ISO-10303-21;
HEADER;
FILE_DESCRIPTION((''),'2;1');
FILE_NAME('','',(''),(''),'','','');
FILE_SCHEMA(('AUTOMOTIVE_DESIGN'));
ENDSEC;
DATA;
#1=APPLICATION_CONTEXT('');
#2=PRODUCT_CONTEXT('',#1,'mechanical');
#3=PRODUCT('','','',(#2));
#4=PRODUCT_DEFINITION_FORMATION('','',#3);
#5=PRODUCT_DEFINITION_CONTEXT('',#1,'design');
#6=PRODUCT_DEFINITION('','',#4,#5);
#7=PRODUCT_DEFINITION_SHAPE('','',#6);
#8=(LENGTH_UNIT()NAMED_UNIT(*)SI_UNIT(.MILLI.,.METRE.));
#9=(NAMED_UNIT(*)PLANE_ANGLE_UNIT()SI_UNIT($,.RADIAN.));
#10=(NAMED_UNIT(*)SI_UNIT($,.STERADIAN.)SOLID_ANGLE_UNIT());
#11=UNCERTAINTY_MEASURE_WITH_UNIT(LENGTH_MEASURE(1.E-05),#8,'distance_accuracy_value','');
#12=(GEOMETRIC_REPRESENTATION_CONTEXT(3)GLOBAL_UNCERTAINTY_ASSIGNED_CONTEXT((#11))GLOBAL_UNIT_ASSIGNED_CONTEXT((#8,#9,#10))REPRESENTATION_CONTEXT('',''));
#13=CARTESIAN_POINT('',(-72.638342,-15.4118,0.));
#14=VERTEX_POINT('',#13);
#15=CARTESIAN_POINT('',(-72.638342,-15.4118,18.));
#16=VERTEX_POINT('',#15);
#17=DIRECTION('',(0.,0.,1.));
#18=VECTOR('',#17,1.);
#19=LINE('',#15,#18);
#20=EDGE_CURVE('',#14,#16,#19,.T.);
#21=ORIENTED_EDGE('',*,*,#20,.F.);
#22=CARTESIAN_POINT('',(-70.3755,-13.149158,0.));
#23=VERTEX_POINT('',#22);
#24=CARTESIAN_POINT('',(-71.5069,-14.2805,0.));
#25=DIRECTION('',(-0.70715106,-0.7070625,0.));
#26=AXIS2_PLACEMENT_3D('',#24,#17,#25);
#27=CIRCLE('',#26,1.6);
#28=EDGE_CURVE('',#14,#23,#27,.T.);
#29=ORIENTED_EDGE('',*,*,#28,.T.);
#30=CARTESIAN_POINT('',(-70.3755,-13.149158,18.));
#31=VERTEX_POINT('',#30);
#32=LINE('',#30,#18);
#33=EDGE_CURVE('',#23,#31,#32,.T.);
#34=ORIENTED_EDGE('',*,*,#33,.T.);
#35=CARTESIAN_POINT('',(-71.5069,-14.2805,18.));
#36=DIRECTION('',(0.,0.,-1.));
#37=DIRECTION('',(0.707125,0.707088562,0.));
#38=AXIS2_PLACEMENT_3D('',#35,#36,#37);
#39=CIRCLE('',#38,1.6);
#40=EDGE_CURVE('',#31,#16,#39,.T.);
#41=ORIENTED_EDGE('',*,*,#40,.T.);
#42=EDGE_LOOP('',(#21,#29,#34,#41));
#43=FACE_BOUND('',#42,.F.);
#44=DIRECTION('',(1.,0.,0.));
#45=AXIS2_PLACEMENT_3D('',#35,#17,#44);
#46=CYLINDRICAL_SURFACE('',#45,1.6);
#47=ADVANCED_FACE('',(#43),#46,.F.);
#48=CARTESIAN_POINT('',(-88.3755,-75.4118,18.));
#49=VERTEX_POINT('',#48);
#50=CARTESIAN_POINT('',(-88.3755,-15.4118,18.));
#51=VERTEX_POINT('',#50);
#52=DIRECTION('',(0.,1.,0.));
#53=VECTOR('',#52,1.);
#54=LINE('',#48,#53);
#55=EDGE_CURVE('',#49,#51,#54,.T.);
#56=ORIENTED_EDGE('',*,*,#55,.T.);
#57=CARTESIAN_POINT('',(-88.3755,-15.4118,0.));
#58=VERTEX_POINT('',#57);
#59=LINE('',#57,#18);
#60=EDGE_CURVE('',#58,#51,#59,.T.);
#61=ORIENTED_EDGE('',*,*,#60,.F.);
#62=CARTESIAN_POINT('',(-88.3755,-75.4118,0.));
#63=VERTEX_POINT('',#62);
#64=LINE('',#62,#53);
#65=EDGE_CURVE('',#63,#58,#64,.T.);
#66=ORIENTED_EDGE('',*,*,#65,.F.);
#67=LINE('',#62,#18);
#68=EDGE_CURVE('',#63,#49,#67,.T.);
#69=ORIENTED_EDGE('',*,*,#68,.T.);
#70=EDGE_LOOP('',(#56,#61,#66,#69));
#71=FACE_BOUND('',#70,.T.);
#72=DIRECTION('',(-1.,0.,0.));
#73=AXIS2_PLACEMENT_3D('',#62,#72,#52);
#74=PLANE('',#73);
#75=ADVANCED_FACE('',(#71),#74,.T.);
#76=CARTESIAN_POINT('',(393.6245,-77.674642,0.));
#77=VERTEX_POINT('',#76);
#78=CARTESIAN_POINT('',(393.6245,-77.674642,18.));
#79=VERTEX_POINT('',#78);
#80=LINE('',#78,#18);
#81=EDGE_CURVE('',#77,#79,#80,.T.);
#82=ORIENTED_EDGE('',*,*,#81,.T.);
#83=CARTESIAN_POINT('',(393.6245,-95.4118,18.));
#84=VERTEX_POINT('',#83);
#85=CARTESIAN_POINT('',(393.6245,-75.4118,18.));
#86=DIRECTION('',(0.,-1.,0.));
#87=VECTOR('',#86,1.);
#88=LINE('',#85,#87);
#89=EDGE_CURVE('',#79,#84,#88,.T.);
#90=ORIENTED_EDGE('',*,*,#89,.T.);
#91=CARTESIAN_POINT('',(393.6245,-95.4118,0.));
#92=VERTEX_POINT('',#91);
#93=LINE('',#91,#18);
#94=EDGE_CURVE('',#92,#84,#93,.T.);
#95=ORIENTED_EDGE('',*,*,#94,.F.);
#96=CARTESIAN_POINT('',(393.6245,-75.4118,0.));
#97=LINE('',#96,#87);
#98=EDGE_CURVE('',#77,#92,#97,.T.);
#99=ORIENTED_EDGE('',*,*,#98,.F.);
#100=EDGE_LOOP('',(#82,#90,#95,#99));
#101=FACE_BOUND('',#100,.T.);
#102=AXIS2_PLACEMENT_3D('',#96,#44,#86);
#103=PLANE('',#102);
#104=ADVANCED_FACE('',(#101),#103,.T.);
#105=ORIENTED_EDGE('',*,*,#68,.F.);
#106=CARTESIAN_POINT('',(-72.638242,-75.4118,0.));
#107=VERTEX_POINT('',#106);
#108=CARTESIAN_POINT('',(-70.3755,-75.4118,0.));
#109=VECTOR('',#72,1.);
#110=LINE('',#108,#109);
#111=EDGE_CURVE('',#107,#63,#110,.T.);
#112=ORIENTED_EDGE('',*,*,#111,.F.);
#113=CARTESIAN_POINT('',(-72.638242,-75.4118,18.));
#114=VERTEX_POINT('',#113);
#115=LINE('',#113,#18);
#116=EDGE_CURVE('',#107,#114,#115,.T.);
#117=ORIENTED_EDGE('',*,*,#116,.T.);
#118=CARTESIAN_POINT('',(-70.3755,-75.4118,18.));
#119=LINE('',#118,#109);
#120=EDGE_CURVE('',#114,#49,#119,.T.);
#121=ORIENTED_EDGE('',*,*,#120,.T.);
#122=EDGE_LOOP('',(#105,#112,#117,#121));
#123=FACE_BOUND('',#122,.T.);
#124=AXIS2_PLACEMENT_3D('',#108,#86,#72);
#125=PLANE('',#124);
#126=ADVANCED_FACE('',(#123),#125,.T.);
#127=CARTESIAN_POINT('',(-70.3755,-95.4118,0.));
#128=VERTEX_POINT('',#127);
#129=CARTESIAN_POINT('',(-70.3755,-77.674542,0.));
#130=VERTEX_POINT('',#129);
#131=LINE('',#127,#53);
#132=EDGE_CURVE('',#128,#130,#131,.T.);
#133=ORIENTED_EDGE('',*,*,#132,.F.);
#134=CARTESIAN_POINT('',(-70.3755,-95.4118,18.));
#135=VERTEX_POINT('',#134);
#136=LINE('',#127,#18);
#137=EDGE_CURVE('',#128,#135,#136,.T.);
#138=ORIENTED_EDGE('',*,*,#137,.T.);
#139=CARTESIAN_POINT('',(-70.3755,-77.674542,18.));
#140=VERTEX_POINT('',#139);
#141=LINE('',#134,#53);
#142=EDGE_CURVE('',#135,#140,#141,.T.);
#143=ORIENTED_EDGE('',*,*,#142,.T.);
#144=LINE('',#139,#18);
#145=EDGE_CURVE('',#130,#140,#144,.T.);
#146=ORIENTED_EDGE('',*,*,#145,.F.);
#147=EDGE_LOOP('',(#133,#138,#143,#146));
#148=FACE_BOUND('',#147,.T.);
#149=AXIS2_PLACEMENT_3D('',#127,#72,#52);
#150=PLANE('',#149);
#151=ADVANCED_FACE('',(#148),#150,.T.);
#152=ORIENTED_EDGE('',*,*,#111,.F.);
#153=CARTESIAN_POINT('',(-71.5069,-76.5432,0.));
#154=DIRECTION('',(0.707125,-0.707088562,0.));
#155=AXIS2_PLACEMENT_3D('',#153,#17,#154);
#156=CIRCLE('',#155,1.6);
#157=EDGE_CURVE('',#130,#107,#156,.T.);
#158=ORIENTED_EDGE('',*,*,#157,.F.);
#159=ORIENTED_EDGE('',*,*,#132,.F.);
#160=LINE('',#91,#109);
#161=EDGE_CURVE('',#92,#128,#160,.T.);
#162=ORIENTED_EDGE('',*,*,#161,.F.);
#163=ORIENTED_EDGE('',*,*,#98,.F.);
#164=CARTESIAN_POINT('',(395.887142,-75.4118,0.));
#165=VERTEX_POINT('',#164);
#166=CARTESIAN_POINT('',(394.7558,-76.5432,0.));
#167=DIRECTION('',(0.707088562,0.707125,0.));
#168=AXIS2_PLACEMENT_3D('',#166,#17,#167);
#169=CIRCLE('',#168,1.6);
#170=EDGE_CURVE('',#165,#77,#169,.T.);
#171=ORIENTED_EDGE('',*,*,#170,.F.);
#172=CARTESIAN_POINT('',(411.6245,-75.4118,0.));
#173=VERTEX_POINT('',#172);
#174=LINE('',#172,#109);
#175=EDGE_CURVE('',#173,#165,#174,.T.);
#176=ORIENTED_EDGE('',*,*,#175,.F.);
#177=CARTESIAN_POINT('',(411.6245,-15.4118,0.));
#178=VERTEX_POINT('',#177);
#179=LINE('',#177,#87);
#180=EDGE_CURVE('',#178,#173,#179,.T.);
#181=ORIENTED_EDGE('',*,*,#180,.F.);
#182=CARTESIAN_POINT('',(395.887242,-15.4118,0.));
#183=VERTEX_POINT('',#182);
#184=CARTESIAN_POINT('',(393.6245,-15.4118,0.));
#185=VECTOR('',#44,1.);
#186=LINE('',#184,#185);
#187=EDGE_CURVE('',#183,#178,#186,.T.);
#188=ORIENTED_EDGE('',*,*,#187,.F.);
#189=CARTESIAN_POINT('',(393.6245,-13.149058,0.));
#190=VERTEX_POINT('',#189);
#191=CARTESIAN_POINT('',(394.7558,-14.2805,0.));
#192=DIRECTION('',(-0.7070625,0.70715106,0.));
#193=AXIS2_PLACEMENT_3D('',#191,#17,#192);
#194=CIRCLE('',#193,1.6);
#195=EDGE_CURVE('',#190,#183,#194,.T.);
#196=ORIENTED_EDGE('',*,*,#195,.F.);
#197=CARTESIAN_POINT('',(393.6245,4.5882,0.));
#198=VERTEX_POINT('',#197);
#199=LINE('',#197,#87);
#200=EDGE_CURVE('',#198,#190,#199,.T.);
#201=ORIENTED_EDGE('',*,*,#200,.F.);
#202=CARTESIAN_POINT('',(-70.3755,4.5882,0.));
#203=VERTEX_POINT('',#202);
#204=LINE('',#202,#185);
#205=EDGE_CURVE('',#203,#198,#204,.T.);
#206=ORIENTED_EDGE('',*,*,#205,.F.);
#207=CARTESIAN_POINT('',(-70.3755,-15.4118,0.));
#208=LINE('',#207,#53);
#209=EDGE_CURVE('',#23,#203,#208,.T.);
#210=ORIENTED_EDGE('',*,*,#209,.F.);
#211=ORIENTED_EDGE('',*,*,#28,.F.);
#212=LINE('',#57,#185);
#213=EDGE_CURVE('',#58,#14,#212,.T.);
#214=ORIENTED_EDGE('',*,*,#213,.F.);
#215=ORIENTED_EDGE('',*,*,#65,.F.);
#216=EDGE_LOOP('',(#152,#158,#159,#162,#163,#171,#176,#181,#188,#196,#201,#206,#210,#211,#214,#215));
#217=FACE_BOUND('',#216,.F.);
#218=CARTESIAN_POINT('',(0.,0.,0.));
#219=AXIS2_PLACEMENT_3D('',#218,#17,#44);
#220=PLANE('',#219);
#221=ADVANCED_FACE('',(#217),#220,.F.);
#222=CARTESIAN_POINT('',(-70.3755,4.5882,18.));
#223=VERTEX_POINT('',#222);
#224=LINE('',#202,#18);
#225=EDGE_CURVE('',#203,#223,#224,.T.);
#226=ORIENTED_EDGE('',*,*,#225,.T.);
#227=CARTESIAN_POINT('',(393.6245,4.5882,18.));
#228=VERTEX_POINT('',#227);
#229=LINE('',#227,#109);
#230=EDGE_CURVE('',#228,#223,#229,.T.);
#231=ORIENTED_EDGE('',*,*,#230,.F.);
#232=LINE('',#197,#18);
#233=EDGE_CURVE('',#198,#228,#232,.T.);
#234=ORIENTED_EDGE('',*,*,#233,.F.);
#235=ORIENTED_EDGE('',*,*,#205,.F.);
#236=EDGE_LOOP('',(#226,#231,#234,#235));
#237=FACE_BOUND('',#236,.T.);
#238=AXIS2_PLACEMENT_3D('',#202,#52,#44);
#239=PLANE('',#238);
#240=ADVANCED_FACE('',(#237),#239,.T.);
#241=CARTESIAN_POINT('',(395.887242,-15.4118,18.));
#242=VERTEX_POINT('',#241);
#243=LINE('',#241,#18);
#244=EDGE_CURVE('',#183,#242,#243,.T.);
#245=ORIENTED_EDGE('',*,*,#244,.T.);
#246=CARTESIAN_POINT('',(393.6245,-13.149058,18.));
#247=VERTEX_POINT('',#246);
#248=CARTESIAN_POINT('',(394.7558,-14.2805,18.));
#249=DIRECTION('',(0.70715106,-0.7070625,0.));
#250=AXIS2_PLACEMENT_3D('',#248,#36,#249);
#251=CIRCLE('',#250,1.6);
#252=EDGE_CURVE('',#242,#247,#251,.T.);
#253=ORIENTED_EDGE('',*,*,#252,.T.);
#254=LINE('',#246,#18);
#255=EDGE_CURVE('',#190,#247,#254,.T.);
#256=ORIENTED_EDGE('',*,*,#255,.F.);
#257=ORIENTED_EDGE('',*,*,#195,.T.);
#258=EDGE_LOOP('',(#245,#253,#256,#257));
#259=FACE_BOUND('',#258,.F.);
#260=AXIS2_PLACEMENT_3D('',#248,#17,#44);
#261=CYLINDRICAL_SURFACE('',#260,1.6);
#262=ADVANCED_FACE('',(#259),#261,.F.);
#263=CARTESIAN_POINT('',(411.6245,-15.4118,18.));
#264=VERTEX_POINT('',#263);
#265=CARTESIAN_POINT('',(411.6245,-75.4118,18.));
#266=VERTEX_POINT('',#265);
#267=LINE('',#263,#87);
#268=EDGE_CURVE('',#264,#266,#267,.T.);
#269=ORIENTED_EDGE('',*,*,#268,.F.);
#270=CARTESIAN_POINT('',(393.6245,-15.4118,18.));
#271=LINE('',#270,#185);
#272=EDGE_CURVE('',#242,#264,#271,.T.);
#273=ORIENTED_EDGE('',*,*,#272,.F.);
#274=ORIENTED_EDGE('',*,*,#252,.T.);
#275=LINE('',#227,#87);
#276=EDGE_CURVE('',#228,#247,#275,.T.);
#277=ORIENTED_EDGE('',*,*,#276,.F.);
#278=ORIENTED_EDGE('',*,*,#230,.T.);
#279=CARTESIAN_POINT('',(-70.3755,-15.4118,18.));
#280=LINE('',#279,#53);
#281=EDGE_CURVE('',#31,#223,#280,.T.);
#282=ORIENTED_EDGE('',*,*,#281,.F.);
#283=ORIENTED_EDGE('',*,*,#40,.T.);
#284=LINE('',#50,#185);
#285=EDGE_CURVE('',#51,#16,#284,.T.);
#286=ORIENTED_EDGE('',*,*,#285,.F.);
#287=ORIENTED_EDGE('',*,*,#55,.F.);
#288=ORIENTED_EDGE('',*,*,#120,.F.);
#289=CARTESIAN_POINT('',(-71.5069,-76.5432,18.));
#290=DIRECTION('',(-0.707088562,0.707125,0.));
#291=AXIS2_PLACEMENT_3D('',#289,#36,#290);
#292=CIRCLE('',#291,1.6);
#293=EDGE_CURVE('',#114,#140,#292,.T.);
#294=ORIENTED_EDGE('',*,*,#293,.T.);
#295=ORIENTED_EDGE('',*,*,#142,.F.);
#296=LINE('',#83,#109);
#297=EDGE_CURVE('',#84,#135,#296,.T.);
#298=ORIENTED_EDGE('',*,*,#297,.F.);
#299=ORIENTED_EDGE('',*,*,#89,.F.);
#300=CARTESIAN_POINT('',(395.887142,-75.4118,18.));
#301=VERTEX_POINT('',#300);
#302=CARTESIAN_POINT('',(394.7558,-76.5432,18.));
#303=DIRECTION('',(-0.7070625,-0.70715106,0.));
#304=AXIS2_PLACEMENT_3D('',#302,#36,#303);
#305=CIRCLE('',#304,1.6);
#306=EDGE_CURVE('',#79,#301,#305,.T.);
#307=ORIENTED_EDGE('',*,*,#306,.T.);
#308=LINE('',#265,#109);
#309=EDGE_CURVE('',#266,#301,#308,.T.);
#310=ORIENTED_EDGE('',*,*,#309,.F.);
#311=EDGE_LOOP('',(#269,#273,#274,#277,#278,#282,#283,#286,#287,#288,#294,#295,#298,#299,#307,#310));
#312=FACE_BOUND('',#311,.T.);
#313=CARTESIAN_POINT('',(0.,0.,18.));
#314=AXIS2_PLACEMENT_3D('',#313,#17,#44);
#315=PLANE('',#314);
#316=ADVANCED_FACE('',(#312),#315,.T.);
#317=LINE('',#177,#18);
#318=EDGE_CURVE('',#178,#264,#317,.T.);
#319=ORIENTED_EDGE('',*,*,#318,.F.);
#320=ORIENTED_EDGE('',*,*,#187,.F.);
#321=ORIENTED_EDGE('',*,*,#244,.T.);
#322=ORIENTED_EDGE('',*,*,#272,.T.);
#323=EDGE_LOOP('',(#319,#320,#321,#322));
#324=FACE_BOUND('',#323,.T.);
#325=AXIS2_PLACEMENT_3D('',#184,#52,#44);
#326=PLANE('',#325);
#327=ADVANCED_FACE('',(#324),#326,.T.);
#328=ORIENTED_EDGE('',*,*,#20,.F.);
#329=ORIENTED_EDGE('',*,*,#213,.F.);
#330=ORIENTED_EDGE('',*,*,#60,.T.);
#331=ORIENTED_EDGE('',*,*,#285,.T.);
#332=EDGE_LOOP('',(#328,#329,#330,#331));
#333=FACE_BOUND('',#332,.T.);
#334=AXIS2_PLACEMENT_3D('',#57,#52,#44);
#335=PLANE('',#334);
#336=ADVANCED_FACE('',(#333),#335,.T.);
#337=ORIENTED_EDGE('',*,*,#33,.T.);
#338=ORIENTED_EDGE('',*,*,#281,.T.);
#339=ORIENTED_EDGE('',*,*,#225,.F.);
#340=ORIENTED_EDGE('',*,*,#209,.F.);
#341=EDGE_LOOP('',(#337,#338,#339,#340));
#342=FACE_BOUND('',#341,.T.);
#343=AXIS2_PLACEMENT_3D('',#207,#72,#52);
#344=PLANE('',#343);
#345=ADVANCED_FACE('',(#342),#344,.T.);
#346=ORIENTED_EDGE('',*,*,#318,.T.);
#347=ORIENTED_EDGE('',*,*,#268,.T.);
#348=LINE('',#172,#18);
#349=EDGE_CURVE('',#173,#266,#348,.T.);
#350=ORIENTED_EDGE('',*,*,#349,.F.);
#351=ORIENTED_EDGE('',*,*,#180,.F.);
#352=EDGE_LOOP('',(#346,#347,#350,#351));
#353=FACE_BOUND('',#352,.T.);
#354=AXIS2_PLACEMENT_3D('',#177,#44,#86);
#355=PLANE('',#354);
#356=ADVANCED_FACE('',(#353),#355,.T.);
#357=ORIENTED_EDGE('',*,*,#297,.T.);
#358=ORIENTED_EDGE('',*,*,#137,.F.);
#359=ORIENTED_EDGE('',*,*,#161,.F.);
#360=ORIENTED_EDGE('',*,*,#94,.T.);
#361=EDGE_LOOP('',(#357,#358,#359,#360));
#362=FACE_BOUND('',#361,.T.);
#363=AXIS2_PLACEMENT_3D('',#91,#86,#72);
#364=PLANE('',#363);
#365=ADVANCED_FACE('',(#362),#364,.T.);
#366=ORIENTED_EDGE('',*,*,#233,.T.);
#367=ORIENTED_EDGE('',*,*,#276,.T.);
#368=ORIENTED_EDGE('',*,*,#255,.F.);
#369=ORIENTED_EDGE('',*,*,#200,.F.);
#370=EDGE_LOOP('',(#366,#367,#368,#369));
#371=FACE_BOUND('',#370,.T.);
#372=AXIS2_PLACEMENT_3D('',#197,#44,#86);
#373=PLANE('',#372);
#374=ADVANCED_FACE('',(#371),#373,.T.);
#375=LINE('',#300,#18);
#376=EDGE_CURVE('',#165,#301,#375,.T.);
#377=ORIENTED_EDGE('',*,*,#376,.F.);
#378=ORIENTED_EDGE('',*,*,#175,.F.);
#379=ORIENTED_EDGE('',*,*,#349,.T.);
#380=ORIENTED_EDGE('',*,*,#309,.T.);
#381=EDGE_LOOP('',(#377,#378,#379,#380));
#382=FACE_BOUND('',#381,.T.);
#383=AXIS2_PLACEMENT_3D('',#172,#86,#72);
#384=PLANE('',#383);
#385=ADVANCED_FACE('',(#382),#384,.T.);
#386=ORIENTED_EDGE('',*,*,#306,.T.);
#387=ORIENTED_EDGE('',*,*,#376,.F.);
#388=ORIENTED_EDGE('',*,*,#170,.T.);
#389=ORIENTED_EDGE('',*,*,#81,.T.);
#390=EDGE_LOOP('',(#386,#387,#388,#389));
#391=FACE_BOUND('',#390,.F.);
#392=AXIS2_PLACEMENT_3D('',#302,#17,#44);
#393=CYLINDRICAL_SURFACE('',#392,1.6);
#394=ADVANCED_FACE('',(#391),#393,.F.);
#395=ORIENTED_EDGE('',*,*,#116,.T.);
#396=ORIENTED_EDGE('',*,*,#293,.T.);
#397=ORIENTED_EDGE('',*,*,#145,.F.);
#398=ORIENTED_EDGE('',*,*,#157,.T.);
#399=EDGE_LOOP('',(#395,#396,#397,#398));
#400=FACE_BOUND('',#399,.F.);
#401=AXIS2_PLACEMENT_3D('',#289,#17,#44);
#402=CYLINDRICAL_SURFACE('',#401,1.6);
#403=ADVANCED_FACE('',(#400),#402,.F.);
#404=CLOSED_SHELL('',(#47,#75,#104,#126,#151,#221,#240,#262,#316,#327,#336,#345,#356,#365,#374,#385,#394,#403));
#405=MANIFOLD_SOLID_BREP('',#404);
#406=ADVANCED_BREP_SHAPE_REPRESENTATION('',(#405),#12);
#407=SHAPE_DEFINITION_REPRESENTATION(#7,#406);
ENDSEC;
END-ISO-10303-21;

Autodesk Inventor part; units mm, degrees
ref_plane "YZ Plane" through (0, 0, 0) normal (1, 0, 0) x (0, 1, 0)
ref_plane "XZ Plane" through (0, 0, 0) normal (0, 1, 0) x (-1, 0, 0)
ref_plane "XY Plane" through (0, 0, 0) normal (0, 0, 1) x (1, 0, 0)
sketch "Sketch1" plane through (0, 0, 0) normal (0, 0, 1) x (1, 0, 0)
  line L0 (393.6245, -95.4118) -> (-70.3755, -95.4118)
  line L1 (-70.3755, 4.5882) -> (17.6245, 4.5882)
  line L2 (117.6245, 4.5882) -> (205.6245, 4.5882)
  line L3 (305.6245, 4.5882) -> (393.6245, 4.5882)
  line L4 (-88.3755, -15.4118) -> (-70.3755, -15.4118)
  line L5 (-70.3755, -75.4118) -> (-88.3755, -75.4118)
  line L6 (-88.3755, -75.4118) -> (-88.3755, -15.4118)
  line L7 (-70.3755, -95.4118) -> (-70.3755, -75.4118)
  line L8 (-70.3755, -15.4118) -> (-70.3755, 4.5882)
  line L9 (393.6245, -15.4118) -> (411.6245, -15.4118)
  line L10 (411.6245, -15.4118) -> (411.6245, -75.4118)
  line L11 (411.6245, -75.4118) -> (393.6245, -75.4118)
  line L12 (393.6245, 4.5882) -> (393.6245, -15.4118)
  line L13 (393.6245, -75.4118) -> (393.6245, -95.4118)
  line L14 (17.6245, 4.5882) -> (117.6245, 4.5882)
  line L15 (205.6245, 4.5882) -> (305.6245, 4.5882)
  point P0 (0, 0)
  dimension "d0" = 464
  dimension "d4" = 100
  dimension "d9" = 100
  dimension "d13" = 18
  dimension "d14" = 60
  dimension "d17" = 20
  dimension "d19" = 60
  dimension "d20" = 18
  dimension "d21" = 100
extrude "Extrusion1" add sketch "Sketch1" along normal blind 18
sketch "Sketch3" plane through (0, 0, 18) normal (0, 0, 1) x (1, 0, 0)
  line L0 (-70.3755, -15.4118) -> (-71.5069, -14.2805)
  line L1 (-70.3755, -15.4118) -> (-68.7755, -15.4118) construction
  line L2 (-70.3755, -75.4118) -> (-71.5069, -76.5432)
  line L3 (393.6245, -15.4118) -> (394.7558, -14.2805)
  line L4 (393.6245, -75.4118) -> (394.7558, -76.5432)
  circle A0 centre (-71.5069, -14.2805) radius 1.6
  circle A1 centre (-71.5069, -76.5432) radius 1.6
  circle A2 centre (394.7558, -14.2805) radius 1.6
  circle A3 centre (394.7558, -76.5432) radius 1.6
  point P0 (0, 0)
  dimension "d40" = 1.6
  dimension "d41" = 135
  dimension "d42" = 3.2
  dimension "d43" = 3.2
  dimension "d44" = 3.2
  dimension "d45" = 3.2
extrude "Extrusion3" cut sketch "Sketch3" against normal blind 20
properties part number "vigas" material "Wood (Birch)"
